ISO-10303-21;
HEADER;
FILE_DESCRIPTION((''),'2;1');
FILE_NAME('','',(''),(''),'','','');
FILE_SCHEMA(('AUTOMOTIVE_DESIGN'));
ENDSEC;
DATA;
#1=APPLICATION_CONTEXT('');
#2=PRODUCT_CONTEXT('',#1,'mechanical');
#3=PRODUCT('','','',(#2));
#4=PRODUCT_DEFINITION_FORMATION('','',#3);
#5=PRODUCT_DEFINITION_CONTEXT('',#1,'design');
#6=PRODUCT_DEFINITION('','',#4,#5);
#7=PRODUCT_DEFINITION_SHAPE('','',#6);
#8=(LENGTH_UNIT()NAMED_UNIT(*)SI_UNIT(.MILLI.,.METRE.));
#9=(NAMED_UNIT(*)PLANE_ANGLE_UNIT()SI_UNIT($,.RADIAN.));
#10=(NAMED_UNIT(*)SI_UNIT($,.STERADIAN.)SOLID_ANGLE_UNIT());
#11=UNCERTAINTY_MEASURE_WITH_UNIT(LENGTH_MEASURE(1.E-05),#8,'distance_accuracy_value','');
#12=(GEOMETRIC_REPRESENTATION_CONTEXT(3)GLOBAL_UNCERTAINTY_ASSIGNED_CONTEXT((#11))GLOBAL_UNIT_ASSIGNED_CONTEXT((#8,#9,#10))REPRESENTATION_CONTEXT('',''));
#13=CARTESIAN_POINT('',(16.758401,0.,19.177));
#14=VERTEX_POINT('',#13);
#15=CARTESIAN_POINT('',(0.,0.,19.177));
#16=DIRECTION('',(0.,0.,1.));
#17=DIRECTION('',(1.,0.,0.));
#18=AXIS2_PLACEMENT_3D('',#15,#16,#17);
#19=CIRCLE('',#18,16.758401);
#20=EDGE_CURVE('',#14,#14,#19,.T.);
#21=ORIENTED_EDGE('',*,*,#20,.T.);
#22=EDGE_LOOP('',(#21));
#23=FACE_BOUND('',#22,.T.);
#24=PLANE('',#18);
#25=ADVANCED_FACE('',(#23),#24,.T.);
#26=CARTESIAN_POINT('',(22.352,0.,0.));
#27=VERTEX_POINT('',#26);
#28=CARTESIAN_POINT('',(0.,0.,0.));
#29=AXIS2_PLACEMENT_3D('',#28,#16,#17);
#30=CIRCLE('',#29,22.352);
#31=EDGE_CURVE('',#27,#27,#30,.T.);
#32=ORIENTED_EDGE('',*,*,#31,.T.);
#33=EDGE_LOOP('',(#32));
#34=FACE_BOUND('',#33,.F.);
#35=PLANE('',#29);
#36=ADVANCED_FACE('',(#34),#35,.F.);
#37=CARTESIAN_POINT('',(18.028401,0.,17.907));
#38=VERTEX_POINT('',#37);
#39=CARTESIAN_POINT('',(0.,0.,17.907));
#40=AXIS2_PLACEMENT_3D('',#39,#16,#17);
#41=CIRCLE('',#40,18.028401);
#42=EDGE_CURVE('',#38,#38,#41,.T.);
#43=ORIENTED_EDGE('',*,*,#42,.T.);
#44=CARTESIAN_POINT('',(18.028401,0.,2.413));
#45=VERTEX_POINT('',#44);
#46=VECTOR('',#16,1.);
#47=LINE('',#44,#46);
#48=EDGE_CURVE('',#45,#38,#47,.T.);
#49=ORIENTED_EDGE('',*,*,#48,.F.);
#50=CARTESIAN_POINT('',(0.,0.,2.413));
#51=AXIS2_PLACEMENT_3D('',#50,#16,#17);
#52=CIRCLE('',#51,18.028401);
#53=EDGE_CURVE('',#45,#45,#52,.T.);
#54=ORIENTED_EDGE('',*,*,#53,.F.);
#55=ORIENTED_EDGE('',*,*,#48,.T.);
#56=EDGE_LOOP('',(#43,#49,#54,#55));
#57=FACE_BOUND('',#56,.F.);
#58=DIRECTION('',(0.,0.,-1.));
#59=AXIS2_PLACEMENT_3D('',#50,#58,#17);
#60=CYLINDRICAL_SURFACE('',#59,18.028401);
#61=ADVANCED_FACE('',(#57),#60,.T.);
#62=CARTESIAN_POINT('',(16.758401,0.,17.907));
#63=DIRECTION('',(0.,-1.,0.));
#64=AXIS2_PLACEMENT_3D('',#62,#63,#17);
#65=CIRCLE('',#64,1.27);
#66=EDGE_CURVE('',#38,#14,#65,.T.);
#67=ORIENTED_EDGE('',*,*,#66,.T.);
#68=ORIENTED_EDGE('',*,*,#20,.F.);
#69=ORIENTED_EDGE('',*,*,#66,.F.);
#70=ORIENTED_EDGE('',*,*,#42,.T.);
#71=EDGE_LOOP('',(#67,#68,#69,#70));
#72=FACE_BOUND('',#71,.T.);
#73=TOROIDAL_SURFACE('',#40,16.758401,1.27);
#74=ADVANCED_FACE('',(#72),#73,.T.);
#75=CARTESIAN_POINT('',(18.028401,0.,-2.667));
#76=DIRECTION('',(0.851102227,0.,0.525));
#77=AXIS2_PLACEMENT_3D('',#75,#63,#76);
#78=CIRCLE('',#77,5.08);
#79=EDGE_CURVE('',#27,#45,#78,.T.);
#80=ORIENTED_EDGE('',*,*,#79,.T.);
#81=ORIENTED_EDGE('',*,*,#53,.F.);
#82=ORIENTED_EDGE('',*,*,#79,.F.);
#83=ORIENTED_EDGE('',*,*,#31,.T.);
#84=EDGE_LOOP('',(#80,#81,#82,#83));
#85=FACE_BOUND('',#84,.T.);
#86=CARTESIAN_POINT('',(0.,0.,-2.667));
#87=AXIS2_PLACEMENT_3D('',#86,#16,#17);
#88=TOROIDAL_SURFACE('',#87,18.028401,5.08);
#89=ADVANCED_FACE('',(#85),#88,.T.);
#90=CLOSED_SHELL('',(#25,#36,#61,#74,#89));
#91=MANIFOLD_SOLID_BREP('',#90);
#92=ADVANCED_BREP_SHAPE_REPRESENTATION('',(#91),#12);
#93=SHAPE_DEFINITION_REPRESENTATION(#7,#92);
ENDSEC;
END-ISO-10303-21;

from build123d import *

# Parameters (mm, degrees)
F0_R     = 22.352
F1_DEPTH = 2.413
F3_R     = 18.0284006892
F4_DEPTH = 16.764
F5_R     = 1.27


# Not quite as in the source:
# - a fillet or chamfer that OpenCascade refuses, or shapes differently, is made with other operations: its cross-section is extruded or revolved along the edge and cut away or added


with BuildPart() as f1:
    # F0 (on Top) → F1 (new body)
    with BuildSketch(Plane.XY):
        Circle(F0_R)
    extrude(amount=F1_DEPTH)

    # F2: fillet of radius 5.08 on 1 edges, made by hand

    # F2_s1 → F2_t2 (revolve, cut)
    with BuildSketch(Plane.XZ):
        with BuildLine():
            ThreePointArc((22.352, 0), (20.5040864528, 1.7689192959), (18.0284006892, 2.413))
            Line((18.0284006892, 2.413), (22.352, 2.413))
            Line((22.352, 2.413), (22.352, 0))
        make_face()
    revolve(axis=Axis((0, 0, 2.413), (0, 0, 1)), mode=Mode.SUBTRACT)

    # F3 (on face) → F4 (join)
    with BuildSketch(Plane.XY.offset(2.413)):
        Circle(F3_R)
    extrude(amount=F4_DEPTH)

    # F5
    f5_edges = [f1.edges().sort_by_distance(p)[0] for p in [
        (-18.028401, 0, 19.177),
    ]]
    fillet(f5_edges, radius=F5_R)


solid = f1.part
